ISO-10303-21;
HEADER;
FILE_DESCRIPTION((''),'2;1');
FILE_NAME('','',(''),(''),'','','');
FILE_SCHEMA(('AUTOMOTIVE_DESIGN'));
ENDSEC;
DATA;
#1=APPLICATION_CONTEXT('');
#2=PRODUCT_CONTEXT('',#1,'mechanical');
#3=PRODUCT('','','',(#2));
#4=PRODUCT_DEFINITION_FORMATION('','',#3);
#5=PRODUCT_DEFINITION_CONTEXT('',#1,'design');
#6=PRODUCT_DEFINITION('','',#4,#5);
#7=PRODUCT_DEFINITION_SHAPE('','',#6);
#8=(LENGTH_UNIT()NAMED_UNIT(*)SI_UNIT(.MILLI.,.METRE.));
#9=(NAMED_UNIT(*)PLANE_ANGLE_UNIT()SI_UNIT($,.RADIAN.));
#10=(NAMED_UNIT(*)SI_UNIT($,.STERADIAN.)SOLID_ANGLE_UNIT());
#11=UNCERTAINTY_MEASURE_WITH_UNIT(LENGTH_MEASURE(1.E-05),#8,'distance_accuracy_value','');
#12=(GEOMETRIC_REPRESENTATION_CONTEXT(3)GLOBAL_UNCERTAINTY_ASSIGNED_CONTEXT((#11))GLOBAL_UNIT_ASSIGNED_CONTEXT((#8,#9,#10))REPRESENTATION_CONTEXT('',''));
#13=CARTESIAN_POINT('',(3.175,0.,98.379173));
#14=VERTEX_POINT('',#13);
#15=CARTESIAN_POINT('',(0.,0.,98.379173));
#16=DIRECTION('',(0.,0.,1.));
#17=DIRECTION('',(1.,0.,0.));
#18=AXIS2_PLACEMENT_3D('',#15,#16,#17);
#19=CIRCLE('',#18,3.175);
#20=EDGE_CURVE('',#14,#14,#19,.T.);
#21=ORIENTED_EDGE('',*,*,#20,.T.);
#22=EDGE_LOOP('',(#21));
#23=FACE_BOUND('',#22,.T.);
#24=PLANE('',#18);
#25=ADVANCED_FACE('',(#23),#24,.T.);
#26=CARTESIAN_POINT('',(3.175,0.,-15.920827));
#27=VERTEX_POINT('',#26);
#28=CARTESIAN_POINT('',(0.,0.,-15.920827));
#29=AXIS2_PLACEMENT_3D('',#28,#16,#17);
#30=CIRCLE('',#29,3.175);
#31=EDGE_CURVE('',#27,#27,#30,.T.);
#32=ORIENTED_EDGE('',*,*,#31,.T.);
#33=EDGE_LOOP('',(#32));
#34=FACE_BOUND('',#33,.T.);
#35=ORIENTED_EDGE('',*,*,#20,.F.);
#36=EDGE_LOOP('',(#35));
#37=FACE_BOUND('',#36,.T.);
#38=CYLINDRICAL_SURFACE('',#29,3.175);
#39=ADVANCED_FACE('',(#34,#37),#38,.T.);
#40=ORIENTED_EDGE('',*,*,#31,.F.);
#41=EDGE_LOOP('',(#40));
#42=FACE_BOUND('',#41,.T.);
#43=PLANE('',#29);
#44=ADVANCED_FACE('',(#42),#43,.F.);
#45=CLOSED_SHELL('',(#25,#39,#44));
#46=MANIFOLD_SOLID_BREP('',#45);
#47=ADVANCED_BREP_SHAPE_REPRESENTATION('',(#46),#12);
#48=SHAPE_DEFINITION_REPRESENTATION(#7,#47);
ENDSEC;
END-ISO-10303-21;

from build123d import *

# Parameters (mm, degrees)
BOSS_EXTRUDE1_START     = -114.3
BOSS_EXTRUDE1_OUTLINE_R = 3.175
BOSS_EXTRUDE1_DEPTH     = 114.3


# Read off the part's stored shape, not the designer's step: Boss-Extrude1
with BuildPart() as part:
    # Boss-Extrude1 outline → Boss-Extrude1 (new body)
    with BuildSketch(Plane.XY.offset(98.3791731).offset(BOSS_EXTRUDE1_START)):
        Circle(BOSS_EXTRUDE1_OUTLINE_R)
    extrude(amount=BOSS_EXTRUDE1_DEPTH)


solid = part.part
